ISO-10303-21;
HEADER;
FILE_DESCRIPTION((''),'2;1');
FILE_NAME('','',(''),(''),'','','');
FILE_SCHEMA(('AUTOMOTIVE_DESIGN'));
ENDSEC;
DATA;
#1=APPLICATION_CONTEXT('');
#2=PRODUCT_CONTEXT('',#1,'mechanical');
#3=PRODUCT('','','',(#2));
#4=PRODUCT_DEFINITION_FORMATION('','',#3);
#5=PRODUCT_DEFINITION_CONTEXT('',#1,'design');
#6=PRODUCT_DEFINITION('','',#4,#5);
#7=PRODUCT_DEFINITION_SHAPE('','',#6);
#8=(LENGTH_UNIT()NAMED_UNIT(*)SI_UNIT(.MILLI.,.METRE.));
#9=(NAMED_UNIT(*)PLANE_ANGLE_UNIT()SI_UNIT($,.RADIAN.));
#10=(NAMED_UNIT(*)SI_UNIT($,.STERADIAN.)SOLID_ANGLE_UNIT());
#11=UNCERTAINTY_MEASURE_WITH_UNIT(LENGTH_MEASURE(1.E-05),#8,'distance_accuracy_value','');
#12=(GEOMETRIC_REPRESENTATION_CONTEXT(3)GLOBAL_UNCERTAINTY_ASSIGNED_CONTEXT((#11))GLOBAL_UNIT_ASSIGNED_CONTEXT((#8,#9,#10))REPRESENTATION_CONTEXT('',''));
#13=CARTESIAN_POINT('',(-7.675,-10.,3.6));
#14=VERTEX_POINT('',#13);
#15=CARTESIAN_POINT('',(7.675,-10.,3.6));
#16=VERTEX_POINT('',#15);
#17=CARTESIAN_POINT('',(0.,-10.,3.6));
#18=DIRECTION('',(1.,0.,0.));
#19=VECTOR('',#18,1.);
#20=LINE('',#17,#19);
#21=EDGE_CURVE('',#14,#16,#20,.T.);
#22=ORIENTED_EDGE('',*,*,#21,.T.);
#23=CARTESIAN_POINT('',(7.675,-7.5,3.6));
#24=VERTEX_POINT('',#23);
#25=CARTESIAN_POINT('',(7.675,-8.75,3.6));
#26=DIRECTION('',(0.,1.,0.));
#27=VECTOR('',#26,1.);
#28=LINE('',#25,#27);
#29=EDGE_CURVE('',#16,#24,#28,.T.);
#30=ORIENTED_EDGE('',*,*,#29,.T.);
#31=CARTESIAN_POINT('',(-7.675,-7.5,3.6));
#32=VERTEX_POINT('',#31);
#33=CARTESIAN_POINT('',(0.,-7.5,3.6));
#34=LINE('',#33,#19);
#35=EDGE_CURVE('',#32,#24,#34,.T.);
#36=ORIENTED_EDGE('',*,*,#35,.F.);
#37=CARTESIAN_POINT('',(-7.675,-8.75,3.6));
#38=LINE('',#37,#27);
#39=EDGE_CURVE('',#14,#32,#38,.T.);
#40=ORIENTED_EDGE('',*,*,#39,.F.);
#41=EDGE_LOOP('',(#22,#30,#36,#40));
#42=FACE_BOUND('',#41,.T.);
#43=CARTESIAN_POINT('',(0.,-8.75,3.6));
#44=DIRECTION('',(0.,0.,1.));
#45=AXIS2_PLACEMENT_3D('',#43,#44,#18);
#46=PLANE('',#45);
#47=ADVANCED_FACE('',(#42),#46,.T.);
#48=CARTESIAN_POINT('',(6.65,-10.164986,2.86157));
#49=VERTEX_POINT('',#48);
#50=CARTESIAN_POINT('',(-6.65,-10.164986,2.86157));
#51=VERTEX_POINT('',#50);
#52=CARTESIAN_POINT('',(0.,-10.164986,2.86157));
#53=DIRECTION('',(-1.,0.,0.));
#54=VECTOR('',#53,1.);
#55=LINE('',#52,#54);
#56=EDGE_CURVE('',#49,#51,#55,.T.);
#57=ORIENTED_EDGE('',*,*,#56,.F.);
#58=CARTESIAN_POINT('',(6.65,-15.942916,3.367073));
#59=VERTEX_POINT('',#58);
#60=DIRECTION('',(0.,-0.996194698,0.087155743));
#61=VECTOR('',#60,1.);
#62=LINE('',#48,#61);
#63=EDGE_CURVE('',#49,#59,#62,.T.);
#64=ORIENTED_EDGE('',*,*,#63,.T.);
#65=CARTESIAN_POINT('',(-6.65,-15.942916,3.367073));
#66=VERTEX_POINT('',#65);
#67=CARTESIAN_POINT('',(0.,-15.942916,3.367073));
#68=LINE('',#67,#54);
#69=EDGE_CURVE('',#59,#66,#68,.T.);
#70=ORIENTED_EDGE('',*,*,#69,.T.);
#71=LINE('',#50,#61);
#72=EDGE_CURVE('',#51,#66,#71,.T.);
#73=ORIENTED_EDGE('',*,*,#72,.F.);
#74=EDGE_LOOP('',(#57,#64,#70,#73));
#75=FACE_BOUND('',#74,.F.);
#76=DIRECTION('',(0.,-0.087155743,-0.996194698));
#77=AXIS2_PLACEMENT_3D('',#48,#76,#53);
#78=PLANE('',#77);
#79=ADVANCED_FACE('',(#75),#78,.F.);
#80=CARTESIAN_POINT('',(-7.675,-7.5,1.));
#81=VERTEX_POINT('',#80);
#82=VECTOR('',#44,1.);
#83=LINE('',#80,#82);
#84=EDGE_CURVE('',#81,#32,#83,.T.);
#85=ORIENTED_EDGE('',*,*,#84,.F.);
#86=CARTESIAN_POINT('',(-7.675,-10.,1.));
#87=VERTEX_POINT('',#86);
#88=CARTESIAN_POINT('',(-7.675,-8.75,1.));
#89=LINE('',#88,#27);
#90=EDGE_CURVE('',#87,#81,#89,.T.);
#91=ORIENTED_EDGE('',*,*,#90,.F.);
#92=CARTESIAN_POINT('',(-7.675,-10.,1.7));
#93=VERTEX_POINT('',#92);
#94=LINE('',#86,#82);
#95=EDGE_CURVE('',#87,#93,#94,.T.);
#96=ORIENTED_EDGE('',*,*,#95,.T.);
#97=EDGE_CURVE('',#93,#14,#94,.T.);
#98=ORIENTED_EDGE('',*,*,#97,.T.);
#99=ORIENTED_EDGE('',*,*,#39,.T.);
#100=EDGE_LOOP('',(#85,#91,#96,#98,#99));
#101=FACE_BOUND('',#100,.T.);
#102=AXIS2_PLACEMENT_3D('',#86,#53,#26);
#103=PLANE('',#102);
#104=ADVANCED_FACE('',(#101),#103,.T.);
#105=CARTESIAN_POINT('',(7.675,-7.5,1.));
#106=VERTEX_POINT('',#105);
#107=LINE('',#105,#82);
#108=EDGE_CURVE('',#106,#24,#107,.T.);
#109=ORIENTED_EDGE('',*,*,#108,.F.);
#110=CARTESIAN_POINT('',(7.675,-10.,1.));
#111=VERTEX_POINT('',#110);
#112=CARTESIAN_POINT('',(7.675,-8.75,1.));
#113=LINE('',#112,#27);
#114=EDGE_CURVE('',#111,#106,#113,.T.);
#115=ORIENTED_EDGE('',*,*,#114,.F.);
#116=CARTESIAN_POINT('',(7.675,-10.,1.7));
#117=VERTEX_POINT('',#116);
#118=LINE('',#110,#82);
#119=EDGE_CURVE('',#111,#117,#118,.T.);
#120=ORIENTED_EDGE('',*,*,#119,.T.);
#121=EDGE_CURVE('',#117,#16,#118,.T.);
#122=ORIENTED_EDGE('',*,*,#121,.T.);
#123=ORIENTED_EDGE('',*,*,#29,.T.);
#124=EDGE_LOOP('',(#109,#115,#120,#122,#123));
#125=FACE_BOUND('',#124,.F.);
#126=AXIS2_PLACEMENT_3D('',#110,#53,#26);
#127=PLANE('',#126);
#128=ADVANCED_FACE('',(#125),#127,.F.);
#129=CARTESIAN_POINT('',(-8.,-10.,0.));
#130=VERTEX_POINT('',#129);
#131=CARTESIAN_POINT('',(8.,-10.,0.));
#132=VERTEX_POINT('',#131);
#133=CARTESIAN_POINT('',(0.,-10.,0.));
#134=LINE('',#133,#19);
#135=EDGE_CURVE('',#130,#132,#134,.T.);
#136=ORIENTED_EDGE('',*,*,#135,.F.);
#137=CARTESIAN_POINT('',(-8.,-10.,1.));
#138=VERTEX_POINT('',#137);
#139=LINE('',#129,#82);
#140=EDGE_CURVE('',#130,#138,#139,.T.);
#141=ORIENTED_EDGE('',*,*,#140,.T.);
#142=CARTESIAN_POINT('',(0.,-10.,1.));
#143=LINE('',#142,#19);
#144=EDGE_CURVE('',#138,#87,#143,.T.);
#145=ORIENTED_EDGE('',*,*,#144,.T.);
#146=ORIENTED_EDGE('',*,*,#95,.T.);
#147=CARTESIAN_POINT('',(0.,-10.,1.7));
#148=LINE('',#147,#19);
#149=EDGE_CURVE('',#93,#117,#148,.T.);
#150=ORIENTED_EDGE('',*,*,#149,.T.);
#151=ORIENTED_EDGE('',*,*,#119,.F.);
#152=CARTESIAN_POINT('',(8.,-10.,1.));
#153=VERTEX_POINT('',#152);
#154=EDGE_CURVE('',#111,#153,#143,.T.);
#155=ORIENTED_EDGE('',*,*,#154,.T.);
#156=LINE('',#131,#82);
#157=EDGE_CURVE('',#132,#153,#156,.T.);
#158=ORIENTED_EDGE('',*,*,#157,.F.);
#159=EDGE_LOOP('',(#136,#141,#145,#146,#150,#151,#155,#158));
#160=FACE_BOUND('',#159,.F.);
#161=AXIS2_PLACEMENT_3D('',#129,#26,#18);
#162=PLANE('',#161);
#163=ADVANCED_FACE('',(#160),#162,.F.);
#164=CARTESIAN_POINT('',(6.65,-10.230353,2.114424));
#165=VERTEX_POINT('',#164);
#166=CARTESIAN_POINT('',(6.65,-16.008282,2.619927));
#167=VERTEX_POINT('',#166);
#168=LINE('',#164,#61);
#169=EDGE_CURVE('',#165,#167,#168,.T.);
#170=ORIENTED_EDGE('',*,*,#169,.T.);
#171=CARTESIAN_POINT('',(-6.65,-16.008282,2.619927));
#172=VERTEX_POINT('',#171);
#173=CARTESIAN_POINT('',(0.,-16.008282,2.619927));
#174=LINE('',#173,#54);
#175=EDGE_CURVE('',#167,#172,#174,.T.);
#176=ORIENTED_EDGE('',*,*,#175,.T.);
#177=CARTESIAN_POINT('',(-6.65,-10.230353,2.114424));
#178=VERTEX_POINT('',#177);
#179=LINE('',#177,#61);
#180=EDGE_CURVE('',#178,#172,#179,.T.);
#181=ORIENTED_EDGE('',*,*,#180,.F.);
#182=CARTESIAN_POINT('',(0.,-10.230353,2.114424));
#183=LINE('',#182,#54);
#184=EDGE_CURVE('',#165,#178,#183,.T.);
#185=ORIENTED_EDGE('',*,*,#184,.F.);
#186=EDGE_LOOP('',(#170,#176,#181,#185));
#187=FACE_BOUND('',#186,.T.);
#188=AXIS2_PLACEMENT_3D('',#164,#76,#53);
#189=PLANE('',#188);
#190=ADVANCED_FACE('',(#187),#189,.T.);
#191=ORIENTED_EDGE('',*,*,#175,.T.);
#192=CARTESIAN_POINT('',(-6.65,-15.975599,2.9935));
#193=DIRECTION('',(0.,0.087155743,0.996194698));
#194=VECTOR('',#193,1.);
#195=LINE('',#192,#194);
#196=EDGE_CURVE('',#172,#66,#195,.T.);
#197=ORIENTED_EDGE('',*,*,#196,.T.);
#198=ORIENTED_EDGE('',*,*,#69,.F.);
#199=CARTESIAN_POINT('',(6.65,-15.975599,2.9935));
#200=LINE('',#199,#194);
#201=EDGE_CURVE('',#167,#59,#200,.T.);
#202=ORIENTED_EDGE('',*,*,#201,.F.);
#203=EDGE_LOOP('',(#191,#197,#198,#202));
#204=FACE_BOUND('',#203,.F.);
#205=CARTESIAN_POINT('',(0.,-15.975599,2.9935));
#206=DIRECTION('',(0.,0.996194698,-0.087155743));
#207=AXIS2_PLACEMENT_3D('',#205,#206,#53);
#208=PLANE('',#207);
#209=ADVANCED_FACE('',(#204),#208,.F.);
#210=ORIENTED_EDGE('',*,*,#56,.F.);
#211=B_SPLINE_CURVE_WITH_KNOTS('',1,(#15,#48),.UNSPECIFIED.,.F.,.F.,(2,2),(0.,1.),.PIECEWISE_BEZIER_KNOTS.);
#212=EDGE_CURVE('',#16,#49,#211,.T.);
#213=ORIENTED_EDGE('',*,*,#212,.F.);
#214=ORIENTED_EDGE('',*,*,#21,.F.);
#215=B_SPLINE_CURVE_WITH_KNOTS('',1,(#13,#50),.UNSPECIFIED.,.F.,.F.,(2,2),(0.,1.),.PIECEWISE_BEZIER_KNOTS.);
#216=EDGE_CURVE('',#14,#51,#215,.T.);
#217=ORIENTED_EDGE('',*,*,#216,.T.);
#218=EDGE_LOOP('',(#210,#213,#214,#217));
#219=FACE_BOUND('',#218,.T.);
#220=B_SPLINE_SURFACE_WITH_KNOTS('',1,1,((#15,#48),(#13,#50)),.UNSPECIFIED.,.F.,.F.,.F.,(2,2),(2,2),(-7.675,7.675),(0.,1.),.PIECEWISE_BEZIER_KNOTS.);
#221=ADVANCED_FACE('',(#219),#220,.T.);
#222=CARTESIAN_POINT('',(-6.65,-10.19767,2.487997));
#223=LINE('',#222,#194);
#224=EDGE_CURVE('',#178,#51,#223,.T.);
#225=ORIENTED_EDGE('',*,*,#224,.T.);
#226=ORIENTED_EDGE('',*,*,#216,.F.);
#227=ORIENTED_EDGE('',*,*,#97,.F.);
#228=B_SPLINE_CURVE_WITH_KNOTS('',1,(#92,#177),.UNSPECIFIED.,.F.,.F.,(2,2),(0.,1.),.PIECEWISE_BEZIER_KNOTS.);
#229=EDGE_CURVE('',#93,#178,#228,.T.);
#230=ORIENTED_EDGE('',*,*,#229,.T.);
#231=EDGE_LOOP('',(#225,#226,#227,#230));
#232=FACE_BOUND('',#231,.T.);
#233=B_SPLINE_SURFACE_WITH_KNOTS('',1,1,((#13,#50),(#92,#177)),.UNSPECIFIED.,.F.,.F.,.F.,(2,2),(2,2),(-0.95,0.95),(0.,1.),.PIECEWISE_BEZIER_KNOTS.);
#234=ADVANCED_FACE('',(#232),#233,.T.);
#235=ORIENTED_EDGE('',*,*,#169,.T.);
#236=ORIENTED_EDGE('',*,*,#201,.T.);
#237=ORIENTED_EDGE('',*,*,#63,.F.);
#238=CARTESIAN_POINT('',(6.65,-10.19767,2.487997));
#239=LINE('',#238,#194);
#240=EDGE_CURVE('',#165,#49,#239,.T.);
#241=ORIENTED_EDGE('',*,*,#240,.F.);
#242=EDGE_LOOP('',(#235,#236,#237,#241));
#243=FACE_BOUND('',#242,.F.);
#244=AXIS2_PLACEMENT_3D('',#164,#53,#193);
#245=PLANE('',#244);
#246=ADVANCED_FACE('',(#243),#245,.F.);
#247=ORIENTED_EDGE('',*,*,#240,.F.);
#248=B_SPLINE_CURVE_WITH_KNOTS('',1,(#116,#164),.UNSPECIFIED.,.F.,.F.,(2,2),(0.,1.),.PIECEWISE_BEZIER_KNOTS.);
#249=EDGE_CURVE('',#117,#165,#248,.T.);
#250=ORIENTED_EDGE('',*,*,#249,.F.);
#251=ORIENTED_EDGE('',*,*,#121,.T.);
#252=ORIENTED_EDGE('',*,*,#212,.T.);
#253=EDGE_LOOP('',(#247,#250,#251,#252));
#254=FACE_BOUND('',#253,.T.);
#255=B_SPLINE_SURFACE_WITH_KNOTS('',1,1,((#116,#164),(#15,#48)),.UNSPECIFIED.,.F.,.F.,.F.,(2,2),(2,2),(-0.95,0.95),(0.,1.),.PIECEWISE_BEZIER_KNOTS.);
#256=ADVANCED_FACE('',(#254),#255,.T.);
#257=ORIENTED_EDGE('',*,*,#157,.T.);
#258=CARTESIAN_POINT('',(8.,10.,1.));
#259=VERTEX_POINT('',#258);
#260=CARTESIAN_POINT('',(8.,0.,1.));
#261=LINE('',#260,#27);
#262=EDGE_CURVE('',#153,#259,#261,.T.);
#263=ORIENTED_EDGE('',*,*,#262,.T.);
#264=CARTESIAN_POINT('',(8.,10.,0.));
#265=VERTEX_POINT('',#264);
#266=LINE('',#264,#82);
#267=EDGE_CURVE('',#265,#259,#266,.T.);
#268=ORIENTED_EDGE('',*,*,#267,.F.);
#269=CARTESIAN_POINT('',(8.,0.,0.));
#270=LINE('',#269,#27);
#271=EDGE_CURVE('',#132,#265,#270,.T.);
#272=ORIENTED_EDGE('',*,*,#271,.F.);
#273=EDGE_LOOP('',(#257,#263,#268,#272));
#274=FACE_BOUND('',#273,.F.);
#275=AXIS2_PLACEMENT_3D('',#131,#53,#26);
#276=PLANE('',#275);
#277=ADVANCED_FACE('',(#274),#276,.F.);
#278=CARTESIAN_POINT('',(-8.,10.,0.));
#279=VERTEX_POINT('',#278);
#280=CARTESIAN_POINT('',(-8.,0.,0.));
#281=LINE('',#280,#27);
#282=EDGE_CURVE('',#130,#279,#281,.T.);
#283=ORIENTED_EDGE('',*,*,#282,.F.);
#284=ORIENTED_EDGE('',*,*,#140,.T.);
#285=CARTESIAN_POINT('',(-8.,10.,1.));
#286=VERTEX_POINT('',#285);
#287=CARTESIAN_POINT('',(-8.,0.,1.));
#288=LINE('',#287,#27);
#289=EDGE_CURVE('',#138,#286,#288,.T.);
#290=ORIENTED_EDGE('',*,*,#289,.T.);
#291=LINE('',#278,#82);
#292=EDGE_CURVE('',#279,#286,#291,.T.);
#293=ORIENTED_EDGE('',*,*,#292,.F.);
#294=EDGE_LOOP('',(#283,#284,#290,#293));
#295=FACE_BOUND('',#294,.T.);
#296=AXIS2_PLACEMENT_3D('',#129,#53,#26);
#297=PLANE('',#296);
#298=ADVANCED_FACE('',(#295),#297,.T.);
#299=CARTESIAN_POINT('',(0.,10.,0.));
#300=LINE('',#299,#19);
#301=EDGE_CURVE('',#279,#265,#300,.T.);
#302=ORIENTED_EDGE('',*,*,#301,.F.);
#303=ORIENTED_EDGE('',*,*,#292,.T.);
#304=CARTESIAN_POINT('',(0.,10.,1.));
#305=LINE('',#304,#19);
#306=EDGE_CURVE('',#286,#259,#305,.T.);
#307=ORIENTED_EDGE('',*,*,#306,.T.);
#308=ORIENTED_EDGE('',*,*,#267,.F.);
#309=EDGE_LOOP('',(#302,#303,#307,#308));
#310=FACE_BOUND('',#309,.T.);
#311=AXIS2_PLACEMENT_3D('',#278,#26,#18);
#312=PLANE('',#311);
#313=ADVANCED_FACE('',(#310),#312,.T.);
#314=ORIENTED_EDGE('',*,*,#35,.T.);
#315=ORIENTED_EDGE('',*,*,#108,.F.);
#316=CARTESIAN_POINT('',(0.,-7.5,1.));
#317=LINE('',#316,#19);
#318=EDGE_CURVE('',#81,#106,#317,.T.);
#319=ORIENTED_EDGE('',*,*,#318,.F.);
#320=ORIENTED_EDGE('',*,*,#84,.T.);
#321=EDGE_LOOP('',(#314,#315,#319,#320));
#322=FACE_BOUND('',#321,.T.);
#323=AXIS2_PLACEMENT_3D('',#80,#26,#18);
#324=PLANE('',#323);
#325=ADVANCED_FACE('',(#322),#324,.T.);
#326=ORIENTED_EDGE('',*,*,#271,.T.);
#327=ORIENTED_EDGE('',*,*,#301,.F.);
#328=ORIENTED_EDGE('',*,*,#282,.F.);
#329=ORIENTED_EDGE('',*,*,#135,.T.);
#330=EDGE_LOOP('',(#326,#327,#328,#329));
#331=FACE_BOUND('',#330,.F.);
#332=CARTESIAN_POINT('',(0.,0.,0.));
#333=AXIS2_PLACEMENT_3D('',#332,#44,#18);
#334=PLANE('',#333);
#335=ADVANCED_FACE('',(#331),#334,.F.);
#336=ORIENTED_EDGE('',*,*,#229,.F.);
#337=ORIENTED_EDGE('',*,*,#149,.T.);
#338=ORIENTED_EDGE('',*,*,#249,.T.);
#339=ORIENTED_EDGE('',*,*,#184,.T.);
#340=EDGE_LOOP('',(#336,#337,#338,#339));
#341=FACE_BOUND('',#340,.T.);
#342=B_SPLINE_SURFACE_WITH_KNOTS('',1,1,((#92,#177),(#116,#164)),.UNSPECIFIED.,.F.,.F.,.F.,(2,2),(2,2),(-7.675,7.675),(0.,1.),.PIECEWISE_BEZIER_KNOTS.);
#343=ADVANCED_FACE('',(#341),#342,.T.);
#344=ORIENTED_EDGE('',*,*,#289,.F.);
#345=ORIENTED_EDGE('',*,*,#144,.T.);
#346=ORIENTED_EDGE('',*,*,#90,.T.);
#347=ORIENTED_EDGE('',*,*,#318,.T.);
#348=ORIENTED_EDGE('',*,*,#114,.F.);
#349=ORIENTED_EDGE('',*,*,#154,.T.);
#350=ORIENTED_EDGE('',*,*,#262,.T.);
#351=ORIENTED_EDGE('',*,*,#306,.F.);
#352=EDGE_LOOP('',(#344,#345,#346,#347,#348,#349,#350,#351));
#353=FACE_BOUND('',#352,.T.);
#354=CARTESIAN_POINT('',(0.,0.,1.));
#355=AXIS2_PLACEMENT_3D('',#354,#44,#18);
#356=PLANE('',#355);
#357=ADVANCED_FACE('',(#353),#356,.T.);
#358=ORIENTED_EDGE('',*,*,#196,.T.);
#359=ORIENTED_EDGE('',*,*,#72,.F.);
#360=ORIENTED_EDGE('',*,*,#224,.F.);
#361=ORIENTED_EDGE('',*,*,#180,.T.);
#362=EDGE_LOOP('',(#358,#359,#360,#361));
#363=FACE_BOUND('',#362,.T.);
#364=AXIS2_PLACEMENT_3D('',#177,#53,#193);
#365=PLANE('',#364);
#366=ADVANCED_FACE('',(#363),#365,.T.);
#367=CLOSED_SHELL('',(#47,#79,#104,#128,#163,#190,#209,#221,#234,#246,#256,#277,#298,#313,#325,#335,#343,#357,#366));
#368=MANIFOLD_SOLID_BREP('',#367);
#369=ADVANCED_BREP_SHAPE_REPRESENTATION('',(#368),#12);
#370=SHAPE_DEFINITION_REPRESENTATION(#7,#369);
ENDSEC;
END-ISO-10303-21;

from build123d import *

# Parameters (mm, degrees)
F0_W      = 16
F0_H      = 20
F1_DEPTH  = 1
F2_W      = 15.35
F2_H      = 2.5
F3_DEPTH  = 2.6
F7_W      = 13.3
F7_H      = 0.75
F8_DEPTH  = 5.8
F4_W      = 15.35
F4_H      = 1.9
F8_FACE_W = 13.3
F8_FACE_H = 0.75


with BuildPart() as f1:
    # F0 (on Top) → F1 (new body)
    with BuildSketch(Plane.XY):
        Rectangle(F0_W, F0_H)
    extrude(amount=F1_DEPTH)

    # F2 (on face) → F3 (join)
    with BuildSketch(Plane.XY.offset(1)):
        with Locations((0, -8.75)):
            Rectangle(F2_W, F2_H)
    extrude(amount=F3_DEPTH)



with BuildPart() as f8:
    # F7 (on face) → F8 (new body)
    with BuildSketch(Plane(origin=(0, -10.3362249547, 0.9043025072), x_dir=(-1, 0, 0), z_dir=(0, 0.9961946981, -0.0871557427))):
        with Locations((0, 1.5897434857)):
            Rectangle(F7_W, F7_H)
    extrude(amount=-F8_DEPTH)


with BuildPart() as f1_1:
    add(f1.part)

    add(f8.part)  # F9 merges F8
    # F4 (on face) → F9 section 0
    with BuildSketch(Plane.XZ.offset(10)):
        with Locations((0, 2.65)):
            Rectangle(F4_W, F4_H)
    # F8_face (on face) → F9 section 1
    with BuildSketch(Plane(origin=(0, -10.1976696804, 2.4879965389), x_dir=(-1, 0, 0), z_dir=(0, 0.9961946981, -0.0871557427))):
        Rectangle(F8_FACE_W, F8_FACE_H)
    loft()


solid = f1_1.part
